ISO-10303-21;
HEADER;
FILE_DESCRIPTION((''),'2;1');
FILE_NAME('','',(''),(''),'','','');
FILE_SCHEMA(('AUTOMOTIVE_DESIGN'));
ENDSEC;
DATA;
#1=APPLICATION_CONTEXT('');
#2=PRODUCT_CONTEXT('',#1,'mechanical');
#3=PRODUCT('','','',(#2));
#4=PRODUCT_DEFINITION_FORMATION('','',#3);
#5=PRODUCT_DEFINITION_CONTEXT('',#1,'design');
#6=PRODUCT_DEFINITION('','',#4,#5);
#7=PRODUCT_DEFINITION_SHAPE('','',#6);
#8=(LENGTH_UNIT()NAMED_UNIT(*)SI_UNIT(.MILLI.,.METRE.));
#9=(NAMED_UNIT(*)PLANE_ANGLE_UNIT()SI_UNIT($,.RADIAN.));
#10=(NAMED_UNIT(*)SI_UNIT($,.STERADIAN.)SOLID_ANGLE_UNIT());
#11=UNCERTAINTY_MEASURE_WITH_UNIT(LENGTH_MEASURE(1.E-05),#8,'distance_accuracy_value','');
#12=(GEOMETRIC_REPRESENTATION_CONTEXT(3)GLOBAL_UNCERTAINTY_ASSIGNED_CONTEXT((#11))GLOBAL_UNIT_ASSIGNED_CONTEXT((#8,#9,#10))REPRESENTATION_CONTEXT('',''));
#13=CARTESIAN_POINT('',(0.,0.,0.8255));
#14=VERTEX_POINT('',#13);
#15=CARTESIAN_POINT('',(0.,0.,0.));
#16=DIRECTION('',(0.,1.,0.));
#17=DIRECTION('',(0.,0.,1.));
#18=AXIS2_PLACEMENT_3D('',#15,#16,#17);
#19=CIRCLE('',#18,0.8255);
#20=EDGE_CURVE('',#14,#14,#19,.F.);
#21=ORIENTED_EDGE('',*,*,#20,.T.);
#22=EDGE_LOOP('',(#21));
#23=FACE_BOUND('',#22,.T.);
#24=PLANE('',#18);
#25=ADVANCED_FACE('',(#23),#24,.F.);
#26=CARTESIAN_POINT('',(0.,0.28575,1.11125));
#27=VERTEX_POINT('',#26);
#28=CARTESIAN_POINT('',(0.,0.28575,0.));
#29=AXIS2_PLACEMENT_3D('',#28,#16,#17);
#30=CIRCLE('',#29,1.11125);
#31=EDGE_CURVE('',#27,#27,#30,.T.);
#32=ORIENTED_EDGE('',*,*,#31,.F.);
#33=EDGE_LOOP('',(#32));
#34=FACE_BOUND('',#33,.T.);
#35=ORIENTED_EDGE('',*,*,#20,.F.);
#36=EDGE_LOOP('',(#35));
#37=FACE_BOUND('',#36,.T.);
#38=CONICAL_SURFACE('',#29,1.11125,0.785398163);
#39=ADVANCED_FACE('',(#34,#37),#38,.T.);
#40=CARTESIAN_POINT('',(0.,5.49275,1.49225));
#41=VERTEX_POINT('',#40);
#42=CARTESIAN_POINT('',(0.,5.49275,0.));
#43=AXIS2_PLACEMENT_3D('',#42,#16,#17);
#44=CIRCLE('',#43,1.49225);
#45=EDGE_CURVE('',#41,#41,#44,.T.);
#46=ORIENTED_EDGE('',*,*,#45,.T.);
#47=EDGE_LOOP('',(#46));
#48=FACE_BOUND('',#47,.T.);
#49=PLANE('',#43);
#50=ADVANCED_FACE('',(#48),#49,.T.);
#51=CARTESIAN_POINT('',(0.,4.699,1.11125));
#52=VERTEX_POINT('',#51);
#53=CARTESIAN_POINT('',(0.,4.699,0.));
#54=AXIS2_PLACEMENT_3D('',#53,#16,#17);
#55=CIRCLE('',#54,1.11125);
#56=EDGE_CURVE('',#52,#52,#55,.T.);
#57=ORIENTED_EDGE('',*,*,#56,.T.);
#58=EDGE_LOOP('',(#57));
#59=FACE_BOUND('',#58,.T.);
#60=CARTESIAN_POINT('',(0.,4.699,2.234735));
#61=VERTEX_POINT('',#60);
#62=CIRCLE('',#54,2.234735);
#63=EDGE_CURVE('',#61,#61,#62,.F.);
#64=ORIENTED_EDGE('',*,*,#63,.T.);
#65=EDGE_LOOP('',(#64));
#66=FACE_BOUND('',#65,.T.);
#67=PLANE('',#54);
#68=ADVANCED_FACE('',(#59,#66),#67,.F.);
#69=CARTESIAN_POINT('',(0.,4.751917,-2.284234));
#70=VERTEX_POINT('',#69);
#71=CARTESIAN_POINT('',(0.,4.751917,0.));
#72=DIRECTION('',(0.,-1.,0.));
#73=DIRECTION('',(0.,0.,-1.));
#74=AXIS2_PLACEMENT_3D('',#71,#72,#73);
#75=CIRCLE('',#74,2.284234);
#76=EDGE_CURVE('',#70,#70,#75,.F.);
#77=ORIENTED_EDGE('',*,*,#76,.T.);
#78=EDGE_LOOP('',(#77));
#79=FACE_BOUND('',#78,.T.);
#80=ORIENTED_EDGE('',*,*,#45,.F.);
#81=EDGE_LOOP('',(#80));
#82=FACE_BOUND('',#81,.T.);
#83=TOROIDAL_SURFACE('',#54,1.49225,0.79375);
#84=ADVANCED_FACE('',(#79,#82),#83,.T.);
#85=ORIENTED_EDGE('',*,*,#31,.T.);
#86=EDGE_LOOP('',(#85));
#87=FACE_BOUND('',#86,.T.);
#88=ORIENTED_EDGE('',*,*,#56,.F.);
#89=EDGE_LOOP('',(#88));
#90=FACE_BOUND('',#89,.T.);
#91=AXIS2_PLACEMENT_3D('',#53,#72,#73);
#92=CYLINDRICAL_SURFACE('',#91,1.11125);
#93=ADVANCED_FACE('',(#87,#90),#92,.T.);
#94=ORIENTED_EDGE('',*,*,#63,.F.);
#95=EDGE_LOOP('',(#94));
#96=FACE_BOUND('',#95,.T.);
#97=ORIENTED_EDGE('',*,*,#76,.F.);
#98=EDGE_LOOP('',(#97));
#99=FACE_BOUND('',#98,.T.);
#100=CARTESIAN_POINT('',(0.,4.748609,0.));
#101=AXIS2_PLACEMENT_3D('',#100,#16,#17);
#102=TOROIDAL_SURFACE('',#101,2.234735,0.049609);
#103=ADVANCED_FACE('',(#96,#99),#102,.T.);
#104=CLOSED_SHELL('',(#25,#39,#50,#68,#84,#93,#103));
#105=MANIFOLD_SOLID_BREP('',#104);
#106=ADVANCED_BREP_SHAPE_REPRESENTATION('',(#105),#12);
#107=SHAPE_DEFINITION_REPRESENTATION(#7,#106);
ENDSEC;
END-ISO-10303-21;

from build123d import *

# Parameters (mm, degrees)
SKETCH1_R           = 1.11125
BOSS_EXTRUDE1_DEPTH = 4.699
SKETCH2_R           = 2.286
BOSS_EXTRUDE2_DEPTH = 0.79375
FILLET1_R           = 0.79375
FILLET2_R           = 0.049609375
CHAMFER1_SIZE       = 0.28575


with BuildPart() as part:
    # Sketch1 → Boss-Extrude1 (new body)
    with BuildSketch(Plane(origin=(0, 0, 0), x_dir=(1, 0, 0), z_dir=(0, 1, 0))):
        with Locations(Location((0, 0, 0), (0, 0, 270))):
            Circle(SKETCH1_R)
    extrude(amount=BOSS_EXTRUDE1_DEPTH)

    # Sketch2 → Boss-Extrude2 (add)
    with BuildSketch(Plane(origin=(0, 4.699, 0), x_dir=(1, 0, 0), z_dir=(0, 1, 0))):
        with Locations(Location((0, 0, 0), (0, 0, 270))):
            Circle(SKETCH2_R)
    extrude(amount=BOSS_EXTRUDE2_DEPTH)

    # Fillet1
    fillet1_edges = [part.edges().sort_by_distance(p)[0] for p in [
        (0, 5.49275, -2.286),
    ]]
    fillet(fillet1_edges, radius=FILLET1_R - 0.0001)  # a hair under: the kernel refuses the full size

    # Fillet2
    fillet2_edges = [part.edges().sort_by_distance(p)[0] for p in [
        (0, 4.699, -2.286),
    ]]
    fillet(fillet2_edges, radius=FILLET2_R)

    # Chamfer1
    chamfer1_edges = [part.edges().sort_by_distance(p)[0] for p in [
        (0, 0, -1.11125),
    ]]
    chamfer(chamfer1_edges, length=CHAMFER1_SIZE)


solid = part.part
